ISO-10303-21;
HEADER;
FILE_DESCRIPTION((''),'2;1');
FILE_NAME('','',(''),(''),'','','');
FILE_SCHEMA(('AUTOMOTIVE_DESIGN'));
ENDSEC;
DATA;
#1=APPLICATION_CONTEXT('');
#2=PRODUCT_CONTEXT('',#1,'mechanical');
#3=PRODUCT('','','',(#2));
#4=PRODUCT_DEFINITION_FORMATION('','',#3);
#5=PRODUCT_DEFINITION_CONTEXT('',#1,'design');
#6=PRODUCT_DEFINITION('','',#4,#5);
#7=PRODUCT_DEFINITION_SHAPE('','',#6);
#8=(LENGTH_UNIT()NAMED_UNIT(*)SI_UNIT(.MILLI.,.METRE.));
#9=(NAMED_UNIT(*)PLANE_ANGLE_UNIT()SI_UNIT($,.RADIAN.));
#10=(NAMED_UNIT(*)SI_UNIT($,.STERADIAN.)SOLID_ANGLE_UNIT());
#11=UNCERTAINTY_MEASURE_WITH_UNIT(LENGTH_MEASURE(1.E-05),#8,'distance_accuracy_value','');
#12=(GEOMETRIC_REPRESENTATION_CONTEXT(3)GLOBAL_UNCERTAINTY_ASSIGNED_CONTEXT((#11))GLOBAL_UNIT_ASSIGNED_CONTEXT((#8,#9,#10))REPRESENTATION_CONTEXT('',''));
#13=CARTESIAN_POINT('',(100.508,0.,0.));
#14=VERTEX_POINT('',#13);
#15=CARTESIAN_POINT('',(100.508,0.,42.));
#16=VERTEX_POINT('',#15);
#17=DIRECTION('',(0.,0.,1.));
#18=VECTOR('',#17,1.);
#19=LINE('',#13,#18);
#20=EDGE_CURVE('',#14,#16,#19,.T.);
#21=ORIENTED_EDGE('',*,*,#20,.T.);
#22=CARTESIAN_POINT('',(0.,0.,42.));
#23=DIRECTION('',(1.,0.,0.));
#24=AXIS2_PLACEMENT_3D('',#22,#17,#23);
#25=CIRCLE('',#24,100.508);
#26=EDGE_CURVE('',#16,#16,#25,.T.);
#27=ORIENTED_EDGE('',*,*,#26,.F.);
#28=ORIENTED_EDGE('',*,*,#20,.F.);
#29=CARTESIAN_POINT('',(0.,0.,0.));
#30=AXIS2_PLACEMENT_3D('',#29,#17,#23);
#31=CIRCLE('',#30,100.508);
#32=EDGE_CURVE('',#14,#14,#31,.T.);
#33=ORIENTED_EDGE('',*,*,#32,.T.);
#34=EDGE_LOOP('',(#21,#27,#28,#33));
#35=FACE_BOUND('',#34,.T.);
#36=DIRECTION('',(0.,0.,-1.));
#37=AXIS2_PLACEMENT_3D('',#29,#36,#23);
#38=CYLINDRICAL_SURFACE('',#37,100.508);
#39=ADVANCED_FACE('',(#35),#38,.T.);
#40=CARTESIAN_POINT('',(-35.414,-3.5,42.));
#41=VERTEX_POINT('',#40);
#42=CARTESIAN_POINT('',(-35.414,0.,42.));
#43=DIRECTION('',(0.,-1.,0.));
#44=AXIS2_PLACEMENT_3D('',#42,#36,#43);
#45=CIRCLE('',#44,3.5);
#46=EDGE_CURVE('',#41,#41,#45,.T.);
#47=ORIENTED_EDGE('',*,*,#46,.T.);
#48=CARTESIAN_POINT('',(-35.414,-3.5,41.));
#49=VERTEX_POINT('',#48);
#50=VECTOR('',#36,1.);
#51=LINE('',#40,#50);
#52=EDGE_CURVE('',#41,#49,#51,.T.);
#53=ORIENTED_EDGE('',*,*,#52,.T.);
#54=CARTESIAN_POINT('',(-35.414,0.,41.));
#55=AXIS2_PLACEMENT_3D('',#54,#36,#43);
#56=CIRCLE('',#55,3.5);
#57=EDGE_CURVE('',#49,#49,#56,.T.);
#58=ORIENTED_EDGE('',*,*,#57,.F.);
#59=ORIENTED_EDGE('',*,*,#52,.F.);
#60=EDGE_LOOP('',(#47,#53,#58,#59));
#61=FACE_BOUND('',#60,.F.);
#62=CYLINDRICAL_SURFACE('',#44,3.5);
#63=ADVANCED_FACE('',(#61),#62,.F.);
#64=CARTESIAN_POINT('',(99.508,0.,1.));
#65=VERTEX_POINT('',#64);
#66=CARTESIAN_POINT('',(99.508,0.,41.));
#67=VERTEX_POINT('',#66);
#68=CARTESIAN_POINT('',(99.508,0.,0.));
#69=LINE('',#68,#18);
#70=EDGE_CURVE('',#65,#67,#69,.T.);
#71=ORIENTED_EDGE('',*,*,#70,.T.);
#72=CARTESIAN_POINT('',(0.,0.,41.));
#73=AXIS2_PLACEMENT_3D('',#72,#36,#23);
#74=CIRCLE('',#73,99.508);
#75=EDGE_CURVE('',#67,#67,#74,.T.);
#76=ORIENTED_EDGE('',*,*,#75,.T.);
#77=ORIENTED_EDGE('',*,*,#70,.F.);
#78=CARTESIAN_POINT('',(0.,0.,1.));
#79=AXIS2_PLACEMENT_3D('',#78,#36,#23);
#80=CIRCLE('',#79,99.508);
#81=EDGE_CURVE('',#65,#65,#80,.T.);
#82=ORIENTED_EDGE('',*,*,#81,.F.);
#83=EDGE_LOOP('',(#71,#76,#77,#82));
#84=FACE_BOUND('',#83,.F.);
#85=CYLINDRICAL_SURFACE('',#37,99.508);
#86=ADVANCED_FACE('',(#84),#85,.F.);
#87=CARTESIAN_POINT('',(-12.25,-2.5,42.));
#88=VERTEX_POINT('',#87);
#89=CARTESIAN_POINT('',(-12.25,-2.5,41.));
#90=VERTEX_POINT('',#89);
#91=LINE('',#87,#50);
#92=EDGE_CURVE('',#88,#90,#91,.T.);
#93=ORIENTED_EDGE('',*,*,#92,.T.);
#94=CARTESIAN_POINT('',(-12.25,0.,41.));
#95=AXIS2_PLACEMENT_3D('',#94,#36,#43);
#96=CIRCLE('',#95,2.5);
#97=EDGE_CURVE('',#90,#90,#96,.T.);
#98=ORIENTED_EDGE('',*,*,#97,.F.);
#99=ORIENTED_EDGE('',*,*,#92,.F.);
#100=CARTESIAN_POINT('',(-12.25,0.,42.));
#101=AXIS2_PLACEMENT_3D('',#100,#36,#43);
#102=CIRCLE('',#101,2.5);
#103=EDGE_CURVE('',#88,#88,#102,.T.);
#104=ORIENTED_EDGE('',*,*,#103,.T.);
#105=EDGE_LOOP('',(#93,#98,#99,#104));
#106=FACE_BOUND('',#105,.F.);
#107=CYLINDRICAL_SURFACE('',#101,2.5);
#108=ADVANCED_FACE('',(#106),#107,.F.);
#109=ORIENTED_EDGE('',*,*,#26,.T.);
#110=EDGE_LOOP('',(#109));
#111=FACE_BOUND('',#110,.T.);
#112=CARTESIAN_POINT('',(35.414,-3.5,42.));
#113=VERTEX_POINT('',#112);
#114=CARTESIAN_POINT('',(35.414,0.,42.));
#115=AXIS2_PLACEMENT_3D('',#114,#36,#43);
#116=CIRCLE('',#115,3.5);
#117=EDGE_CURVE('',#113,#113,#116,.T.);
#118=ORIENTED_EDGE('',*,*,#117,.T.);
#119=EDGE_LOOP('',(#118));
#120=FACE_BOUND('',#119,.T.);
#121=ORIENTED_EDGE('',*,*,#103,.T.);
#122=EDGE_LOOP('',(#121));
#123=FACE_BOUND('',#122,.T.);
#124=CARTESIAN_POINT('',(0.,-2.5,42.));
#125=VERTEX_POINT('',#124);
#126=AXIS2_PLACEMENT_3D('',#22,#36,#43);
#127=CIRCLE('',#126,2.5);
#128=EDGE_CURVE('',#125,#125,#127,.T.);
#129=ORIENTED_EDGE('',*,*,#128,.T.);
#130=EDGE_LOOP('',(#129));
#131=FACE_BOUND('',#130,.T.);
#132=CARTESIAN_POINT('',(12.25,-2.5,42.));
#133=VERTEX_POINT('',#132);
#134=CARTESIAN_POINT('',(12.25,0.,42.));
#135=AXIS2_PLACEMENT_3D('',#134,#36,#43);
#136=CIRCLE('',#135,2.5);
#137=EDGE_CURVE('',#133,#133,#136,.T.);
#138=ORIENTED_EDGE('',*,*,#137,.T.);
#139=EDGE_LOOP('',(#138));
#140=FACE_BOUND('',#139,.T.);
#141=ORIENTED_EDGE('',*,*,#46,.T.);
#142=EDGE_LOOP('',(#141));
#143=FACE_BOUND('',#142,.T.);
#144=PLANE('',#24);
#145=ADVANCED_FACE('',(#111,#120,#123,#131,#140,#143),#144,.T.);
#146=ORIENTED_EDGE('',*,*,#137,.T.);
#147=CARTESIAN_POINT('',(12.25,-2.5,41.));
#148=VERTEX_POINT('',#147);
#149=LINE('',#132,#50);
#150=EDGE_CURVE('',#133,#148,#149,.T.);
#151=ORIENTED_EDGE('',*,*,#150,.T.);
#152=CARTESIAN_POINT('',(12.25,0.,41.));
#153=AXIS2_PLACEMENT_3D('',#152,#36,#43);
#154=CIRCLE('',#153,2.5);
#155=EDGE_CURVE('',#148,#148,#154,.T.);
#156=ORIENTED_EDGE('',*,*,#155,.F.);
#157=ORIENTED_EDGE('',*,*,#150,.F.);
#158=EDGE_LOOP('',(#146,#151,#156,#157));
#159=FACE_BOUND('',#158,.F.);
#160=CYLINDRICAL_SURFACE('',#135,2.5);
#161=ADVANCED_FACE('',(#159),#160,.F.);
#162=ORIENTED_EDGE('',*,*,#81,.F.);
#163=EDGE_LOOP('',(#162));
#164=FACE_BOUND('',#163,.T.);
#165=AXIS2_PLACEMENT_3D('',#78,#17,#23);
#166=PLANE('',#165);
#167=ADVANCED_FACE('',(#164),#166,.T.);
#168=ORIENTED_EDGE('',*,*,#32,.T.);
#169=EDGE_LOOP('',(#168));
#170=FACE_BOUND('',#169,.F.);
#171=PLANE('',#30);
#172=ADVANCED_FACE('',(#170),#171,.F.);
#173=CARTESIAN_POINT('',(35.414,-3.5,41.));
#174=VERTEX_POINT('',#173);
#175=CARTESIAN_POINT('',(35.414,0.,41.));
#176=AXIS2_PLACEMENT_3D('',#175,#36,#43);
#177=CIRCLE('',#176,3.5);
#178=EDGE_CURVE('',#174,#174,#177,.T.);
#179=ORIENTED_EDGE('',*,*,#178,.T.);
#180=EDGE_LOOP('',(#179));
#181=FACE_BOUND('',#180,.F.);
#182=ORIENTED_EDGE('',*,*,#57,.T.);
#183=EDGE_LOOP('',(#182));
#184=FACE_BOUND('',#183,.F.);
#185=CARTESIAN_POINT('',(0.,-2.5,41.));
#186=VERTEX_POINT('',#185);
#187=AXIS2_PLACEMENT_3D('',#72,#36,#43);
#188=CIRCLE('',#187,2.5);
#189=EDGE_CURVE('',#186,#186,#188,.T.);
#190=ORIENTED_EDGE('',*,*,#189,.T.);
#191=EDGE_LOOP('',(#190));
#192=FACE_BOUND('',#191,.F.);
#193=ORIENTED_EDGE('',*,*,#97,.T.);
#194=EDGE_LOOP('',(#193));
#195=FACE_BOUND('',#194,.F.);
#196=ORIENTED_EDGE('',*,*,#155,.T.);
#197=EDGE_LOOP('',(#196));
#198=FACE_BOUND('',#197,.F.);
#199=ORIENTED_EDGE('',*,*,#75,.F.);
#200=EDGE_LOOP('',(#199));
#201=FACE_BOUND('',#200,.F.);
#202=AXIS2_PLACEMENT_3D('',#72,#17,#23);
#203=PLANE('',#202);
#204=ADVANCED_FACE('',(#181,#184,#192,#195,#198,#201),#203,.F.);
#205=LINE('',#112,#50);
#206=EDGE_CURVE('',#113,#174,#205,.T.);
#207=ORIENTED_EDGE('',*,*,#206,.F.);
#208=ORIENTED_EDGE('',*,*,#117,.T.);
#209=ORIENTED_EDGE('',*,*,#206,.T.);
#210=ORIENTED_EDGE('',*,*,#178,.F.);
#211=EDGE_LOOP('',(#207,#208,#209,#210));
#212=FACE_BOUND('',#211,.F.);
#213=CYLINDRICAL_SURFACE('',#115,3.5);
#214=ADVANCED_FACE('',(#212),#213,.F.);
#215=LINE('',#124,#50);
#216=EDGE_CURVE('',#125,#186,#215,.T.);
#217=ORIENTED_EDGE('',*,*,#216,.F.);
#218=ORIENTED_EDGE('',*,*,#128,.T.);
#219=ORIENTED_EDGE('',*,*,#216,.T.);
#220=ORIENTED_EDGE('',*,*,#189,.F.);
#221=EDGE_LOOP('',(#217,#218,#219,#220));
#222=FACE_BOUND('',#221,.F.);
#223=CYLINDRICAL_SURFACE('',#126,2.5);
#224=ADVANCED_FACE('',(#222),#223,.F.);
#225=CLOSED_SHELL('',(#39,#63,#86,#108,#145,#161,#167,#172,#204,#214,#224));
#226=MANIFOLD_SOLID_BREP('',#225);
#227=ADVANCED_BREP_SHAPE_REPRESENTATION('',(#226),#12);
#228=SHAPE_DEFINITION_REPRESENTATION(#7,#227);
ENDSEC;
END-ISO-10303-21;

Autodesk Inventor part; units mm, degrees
ref_plane "YZ Plane" through (0, 0, 0) normal (1, 0, 0) x (0, 1, 0)
ref_plane "XZ Plane" through (0, 0, 0) normal (0, 1, 0) x (-1, 0, 0)
ref_plane "XY Plane" through (0, 0, 0) normal (0, 0, 1) x (1, 0, 0)
sketch "Sketch1" plane through (0, 0, 0) normal (0, 0, 1) x (1, 0, 0)
  circle A0 centre (0, 0) radius 100.508
  dimension "OuterVesselInnerdiameter" = 201.016
extrude "Extrusion1" add sketch "Sketch1" along normal blind 42
shell "Shell2" thickness 1 removed faces 0
sketch "Sketch2" plane through (0, 0, 42) normal (0, 0, 1) x (1, 0, 0)
  line L0 (0, 0) -> (-12.25, 0)
  line L1 (0, 0) -> (12.25, 0)
  point P0 (35.414, 0)
  point P1 (-35.414, 0)
  dimension "d30" = 24.5
hole "Hole1" at (-12.25, 0, 42) at (0, 0, 42) at (12.25, 0, 42) direction (0, 0, -1) diameter 5 depth 1
hole "Hole2" at (35.414, 0, 42) at (-35.414, 0, 42) direction (0, 0, -1) diameter 7 depth 1
equation "\"OuterVesselInnerdiameter\" = 4 * CrucibleThickness + 4 * CrucibleInnerDiameter"
equation "\"height\" = 1.4 * SupportHeight + 1.4 * crucible_height"
equation "\"d30\" = DistanceBetweenHolesSweep"
equation "\"d14\" = PenetrationOuterDiameter"
equation "\"d23\" = PenetrationUpstreamInnerDiameter + 2 * PenetrationUpstreamThickness"
equation "\"OuterVesselTopHolesSpacing\" = DistanceBetweenHolesSweep"
equation "\"CrucibleThickness\" = 0.254"
equation "\"CrucibleDistanceBetweenTopHoles\" = 7.62"
equation "\"OuterVesselBottomHolesSpacing\" = CrucibleThickness + 0.5 * CrucibleInnerDiameter + PenetrationUpstreamDistanceFromWallToCentre"
equation "\"CrucibleInnerDiameter\" = 50"
equation "\"SupportHeight\" = 10"
equation "\"crucible_height\" = 20"
equation "\"DistanceBetweenHolesSweep\" = 24.499987"
equation "\"PenetrationOuterDiameter\" = 5"
equation "\"PenetrationUpstreamInnerDiameter\" = 5"
equation "\"PenetrationUpstreamThickness\" = 1"
equation "\"PenetrationUpstreamDistanceFromWallToCentre\" = 10.16"
properties part number "outer vessel"
